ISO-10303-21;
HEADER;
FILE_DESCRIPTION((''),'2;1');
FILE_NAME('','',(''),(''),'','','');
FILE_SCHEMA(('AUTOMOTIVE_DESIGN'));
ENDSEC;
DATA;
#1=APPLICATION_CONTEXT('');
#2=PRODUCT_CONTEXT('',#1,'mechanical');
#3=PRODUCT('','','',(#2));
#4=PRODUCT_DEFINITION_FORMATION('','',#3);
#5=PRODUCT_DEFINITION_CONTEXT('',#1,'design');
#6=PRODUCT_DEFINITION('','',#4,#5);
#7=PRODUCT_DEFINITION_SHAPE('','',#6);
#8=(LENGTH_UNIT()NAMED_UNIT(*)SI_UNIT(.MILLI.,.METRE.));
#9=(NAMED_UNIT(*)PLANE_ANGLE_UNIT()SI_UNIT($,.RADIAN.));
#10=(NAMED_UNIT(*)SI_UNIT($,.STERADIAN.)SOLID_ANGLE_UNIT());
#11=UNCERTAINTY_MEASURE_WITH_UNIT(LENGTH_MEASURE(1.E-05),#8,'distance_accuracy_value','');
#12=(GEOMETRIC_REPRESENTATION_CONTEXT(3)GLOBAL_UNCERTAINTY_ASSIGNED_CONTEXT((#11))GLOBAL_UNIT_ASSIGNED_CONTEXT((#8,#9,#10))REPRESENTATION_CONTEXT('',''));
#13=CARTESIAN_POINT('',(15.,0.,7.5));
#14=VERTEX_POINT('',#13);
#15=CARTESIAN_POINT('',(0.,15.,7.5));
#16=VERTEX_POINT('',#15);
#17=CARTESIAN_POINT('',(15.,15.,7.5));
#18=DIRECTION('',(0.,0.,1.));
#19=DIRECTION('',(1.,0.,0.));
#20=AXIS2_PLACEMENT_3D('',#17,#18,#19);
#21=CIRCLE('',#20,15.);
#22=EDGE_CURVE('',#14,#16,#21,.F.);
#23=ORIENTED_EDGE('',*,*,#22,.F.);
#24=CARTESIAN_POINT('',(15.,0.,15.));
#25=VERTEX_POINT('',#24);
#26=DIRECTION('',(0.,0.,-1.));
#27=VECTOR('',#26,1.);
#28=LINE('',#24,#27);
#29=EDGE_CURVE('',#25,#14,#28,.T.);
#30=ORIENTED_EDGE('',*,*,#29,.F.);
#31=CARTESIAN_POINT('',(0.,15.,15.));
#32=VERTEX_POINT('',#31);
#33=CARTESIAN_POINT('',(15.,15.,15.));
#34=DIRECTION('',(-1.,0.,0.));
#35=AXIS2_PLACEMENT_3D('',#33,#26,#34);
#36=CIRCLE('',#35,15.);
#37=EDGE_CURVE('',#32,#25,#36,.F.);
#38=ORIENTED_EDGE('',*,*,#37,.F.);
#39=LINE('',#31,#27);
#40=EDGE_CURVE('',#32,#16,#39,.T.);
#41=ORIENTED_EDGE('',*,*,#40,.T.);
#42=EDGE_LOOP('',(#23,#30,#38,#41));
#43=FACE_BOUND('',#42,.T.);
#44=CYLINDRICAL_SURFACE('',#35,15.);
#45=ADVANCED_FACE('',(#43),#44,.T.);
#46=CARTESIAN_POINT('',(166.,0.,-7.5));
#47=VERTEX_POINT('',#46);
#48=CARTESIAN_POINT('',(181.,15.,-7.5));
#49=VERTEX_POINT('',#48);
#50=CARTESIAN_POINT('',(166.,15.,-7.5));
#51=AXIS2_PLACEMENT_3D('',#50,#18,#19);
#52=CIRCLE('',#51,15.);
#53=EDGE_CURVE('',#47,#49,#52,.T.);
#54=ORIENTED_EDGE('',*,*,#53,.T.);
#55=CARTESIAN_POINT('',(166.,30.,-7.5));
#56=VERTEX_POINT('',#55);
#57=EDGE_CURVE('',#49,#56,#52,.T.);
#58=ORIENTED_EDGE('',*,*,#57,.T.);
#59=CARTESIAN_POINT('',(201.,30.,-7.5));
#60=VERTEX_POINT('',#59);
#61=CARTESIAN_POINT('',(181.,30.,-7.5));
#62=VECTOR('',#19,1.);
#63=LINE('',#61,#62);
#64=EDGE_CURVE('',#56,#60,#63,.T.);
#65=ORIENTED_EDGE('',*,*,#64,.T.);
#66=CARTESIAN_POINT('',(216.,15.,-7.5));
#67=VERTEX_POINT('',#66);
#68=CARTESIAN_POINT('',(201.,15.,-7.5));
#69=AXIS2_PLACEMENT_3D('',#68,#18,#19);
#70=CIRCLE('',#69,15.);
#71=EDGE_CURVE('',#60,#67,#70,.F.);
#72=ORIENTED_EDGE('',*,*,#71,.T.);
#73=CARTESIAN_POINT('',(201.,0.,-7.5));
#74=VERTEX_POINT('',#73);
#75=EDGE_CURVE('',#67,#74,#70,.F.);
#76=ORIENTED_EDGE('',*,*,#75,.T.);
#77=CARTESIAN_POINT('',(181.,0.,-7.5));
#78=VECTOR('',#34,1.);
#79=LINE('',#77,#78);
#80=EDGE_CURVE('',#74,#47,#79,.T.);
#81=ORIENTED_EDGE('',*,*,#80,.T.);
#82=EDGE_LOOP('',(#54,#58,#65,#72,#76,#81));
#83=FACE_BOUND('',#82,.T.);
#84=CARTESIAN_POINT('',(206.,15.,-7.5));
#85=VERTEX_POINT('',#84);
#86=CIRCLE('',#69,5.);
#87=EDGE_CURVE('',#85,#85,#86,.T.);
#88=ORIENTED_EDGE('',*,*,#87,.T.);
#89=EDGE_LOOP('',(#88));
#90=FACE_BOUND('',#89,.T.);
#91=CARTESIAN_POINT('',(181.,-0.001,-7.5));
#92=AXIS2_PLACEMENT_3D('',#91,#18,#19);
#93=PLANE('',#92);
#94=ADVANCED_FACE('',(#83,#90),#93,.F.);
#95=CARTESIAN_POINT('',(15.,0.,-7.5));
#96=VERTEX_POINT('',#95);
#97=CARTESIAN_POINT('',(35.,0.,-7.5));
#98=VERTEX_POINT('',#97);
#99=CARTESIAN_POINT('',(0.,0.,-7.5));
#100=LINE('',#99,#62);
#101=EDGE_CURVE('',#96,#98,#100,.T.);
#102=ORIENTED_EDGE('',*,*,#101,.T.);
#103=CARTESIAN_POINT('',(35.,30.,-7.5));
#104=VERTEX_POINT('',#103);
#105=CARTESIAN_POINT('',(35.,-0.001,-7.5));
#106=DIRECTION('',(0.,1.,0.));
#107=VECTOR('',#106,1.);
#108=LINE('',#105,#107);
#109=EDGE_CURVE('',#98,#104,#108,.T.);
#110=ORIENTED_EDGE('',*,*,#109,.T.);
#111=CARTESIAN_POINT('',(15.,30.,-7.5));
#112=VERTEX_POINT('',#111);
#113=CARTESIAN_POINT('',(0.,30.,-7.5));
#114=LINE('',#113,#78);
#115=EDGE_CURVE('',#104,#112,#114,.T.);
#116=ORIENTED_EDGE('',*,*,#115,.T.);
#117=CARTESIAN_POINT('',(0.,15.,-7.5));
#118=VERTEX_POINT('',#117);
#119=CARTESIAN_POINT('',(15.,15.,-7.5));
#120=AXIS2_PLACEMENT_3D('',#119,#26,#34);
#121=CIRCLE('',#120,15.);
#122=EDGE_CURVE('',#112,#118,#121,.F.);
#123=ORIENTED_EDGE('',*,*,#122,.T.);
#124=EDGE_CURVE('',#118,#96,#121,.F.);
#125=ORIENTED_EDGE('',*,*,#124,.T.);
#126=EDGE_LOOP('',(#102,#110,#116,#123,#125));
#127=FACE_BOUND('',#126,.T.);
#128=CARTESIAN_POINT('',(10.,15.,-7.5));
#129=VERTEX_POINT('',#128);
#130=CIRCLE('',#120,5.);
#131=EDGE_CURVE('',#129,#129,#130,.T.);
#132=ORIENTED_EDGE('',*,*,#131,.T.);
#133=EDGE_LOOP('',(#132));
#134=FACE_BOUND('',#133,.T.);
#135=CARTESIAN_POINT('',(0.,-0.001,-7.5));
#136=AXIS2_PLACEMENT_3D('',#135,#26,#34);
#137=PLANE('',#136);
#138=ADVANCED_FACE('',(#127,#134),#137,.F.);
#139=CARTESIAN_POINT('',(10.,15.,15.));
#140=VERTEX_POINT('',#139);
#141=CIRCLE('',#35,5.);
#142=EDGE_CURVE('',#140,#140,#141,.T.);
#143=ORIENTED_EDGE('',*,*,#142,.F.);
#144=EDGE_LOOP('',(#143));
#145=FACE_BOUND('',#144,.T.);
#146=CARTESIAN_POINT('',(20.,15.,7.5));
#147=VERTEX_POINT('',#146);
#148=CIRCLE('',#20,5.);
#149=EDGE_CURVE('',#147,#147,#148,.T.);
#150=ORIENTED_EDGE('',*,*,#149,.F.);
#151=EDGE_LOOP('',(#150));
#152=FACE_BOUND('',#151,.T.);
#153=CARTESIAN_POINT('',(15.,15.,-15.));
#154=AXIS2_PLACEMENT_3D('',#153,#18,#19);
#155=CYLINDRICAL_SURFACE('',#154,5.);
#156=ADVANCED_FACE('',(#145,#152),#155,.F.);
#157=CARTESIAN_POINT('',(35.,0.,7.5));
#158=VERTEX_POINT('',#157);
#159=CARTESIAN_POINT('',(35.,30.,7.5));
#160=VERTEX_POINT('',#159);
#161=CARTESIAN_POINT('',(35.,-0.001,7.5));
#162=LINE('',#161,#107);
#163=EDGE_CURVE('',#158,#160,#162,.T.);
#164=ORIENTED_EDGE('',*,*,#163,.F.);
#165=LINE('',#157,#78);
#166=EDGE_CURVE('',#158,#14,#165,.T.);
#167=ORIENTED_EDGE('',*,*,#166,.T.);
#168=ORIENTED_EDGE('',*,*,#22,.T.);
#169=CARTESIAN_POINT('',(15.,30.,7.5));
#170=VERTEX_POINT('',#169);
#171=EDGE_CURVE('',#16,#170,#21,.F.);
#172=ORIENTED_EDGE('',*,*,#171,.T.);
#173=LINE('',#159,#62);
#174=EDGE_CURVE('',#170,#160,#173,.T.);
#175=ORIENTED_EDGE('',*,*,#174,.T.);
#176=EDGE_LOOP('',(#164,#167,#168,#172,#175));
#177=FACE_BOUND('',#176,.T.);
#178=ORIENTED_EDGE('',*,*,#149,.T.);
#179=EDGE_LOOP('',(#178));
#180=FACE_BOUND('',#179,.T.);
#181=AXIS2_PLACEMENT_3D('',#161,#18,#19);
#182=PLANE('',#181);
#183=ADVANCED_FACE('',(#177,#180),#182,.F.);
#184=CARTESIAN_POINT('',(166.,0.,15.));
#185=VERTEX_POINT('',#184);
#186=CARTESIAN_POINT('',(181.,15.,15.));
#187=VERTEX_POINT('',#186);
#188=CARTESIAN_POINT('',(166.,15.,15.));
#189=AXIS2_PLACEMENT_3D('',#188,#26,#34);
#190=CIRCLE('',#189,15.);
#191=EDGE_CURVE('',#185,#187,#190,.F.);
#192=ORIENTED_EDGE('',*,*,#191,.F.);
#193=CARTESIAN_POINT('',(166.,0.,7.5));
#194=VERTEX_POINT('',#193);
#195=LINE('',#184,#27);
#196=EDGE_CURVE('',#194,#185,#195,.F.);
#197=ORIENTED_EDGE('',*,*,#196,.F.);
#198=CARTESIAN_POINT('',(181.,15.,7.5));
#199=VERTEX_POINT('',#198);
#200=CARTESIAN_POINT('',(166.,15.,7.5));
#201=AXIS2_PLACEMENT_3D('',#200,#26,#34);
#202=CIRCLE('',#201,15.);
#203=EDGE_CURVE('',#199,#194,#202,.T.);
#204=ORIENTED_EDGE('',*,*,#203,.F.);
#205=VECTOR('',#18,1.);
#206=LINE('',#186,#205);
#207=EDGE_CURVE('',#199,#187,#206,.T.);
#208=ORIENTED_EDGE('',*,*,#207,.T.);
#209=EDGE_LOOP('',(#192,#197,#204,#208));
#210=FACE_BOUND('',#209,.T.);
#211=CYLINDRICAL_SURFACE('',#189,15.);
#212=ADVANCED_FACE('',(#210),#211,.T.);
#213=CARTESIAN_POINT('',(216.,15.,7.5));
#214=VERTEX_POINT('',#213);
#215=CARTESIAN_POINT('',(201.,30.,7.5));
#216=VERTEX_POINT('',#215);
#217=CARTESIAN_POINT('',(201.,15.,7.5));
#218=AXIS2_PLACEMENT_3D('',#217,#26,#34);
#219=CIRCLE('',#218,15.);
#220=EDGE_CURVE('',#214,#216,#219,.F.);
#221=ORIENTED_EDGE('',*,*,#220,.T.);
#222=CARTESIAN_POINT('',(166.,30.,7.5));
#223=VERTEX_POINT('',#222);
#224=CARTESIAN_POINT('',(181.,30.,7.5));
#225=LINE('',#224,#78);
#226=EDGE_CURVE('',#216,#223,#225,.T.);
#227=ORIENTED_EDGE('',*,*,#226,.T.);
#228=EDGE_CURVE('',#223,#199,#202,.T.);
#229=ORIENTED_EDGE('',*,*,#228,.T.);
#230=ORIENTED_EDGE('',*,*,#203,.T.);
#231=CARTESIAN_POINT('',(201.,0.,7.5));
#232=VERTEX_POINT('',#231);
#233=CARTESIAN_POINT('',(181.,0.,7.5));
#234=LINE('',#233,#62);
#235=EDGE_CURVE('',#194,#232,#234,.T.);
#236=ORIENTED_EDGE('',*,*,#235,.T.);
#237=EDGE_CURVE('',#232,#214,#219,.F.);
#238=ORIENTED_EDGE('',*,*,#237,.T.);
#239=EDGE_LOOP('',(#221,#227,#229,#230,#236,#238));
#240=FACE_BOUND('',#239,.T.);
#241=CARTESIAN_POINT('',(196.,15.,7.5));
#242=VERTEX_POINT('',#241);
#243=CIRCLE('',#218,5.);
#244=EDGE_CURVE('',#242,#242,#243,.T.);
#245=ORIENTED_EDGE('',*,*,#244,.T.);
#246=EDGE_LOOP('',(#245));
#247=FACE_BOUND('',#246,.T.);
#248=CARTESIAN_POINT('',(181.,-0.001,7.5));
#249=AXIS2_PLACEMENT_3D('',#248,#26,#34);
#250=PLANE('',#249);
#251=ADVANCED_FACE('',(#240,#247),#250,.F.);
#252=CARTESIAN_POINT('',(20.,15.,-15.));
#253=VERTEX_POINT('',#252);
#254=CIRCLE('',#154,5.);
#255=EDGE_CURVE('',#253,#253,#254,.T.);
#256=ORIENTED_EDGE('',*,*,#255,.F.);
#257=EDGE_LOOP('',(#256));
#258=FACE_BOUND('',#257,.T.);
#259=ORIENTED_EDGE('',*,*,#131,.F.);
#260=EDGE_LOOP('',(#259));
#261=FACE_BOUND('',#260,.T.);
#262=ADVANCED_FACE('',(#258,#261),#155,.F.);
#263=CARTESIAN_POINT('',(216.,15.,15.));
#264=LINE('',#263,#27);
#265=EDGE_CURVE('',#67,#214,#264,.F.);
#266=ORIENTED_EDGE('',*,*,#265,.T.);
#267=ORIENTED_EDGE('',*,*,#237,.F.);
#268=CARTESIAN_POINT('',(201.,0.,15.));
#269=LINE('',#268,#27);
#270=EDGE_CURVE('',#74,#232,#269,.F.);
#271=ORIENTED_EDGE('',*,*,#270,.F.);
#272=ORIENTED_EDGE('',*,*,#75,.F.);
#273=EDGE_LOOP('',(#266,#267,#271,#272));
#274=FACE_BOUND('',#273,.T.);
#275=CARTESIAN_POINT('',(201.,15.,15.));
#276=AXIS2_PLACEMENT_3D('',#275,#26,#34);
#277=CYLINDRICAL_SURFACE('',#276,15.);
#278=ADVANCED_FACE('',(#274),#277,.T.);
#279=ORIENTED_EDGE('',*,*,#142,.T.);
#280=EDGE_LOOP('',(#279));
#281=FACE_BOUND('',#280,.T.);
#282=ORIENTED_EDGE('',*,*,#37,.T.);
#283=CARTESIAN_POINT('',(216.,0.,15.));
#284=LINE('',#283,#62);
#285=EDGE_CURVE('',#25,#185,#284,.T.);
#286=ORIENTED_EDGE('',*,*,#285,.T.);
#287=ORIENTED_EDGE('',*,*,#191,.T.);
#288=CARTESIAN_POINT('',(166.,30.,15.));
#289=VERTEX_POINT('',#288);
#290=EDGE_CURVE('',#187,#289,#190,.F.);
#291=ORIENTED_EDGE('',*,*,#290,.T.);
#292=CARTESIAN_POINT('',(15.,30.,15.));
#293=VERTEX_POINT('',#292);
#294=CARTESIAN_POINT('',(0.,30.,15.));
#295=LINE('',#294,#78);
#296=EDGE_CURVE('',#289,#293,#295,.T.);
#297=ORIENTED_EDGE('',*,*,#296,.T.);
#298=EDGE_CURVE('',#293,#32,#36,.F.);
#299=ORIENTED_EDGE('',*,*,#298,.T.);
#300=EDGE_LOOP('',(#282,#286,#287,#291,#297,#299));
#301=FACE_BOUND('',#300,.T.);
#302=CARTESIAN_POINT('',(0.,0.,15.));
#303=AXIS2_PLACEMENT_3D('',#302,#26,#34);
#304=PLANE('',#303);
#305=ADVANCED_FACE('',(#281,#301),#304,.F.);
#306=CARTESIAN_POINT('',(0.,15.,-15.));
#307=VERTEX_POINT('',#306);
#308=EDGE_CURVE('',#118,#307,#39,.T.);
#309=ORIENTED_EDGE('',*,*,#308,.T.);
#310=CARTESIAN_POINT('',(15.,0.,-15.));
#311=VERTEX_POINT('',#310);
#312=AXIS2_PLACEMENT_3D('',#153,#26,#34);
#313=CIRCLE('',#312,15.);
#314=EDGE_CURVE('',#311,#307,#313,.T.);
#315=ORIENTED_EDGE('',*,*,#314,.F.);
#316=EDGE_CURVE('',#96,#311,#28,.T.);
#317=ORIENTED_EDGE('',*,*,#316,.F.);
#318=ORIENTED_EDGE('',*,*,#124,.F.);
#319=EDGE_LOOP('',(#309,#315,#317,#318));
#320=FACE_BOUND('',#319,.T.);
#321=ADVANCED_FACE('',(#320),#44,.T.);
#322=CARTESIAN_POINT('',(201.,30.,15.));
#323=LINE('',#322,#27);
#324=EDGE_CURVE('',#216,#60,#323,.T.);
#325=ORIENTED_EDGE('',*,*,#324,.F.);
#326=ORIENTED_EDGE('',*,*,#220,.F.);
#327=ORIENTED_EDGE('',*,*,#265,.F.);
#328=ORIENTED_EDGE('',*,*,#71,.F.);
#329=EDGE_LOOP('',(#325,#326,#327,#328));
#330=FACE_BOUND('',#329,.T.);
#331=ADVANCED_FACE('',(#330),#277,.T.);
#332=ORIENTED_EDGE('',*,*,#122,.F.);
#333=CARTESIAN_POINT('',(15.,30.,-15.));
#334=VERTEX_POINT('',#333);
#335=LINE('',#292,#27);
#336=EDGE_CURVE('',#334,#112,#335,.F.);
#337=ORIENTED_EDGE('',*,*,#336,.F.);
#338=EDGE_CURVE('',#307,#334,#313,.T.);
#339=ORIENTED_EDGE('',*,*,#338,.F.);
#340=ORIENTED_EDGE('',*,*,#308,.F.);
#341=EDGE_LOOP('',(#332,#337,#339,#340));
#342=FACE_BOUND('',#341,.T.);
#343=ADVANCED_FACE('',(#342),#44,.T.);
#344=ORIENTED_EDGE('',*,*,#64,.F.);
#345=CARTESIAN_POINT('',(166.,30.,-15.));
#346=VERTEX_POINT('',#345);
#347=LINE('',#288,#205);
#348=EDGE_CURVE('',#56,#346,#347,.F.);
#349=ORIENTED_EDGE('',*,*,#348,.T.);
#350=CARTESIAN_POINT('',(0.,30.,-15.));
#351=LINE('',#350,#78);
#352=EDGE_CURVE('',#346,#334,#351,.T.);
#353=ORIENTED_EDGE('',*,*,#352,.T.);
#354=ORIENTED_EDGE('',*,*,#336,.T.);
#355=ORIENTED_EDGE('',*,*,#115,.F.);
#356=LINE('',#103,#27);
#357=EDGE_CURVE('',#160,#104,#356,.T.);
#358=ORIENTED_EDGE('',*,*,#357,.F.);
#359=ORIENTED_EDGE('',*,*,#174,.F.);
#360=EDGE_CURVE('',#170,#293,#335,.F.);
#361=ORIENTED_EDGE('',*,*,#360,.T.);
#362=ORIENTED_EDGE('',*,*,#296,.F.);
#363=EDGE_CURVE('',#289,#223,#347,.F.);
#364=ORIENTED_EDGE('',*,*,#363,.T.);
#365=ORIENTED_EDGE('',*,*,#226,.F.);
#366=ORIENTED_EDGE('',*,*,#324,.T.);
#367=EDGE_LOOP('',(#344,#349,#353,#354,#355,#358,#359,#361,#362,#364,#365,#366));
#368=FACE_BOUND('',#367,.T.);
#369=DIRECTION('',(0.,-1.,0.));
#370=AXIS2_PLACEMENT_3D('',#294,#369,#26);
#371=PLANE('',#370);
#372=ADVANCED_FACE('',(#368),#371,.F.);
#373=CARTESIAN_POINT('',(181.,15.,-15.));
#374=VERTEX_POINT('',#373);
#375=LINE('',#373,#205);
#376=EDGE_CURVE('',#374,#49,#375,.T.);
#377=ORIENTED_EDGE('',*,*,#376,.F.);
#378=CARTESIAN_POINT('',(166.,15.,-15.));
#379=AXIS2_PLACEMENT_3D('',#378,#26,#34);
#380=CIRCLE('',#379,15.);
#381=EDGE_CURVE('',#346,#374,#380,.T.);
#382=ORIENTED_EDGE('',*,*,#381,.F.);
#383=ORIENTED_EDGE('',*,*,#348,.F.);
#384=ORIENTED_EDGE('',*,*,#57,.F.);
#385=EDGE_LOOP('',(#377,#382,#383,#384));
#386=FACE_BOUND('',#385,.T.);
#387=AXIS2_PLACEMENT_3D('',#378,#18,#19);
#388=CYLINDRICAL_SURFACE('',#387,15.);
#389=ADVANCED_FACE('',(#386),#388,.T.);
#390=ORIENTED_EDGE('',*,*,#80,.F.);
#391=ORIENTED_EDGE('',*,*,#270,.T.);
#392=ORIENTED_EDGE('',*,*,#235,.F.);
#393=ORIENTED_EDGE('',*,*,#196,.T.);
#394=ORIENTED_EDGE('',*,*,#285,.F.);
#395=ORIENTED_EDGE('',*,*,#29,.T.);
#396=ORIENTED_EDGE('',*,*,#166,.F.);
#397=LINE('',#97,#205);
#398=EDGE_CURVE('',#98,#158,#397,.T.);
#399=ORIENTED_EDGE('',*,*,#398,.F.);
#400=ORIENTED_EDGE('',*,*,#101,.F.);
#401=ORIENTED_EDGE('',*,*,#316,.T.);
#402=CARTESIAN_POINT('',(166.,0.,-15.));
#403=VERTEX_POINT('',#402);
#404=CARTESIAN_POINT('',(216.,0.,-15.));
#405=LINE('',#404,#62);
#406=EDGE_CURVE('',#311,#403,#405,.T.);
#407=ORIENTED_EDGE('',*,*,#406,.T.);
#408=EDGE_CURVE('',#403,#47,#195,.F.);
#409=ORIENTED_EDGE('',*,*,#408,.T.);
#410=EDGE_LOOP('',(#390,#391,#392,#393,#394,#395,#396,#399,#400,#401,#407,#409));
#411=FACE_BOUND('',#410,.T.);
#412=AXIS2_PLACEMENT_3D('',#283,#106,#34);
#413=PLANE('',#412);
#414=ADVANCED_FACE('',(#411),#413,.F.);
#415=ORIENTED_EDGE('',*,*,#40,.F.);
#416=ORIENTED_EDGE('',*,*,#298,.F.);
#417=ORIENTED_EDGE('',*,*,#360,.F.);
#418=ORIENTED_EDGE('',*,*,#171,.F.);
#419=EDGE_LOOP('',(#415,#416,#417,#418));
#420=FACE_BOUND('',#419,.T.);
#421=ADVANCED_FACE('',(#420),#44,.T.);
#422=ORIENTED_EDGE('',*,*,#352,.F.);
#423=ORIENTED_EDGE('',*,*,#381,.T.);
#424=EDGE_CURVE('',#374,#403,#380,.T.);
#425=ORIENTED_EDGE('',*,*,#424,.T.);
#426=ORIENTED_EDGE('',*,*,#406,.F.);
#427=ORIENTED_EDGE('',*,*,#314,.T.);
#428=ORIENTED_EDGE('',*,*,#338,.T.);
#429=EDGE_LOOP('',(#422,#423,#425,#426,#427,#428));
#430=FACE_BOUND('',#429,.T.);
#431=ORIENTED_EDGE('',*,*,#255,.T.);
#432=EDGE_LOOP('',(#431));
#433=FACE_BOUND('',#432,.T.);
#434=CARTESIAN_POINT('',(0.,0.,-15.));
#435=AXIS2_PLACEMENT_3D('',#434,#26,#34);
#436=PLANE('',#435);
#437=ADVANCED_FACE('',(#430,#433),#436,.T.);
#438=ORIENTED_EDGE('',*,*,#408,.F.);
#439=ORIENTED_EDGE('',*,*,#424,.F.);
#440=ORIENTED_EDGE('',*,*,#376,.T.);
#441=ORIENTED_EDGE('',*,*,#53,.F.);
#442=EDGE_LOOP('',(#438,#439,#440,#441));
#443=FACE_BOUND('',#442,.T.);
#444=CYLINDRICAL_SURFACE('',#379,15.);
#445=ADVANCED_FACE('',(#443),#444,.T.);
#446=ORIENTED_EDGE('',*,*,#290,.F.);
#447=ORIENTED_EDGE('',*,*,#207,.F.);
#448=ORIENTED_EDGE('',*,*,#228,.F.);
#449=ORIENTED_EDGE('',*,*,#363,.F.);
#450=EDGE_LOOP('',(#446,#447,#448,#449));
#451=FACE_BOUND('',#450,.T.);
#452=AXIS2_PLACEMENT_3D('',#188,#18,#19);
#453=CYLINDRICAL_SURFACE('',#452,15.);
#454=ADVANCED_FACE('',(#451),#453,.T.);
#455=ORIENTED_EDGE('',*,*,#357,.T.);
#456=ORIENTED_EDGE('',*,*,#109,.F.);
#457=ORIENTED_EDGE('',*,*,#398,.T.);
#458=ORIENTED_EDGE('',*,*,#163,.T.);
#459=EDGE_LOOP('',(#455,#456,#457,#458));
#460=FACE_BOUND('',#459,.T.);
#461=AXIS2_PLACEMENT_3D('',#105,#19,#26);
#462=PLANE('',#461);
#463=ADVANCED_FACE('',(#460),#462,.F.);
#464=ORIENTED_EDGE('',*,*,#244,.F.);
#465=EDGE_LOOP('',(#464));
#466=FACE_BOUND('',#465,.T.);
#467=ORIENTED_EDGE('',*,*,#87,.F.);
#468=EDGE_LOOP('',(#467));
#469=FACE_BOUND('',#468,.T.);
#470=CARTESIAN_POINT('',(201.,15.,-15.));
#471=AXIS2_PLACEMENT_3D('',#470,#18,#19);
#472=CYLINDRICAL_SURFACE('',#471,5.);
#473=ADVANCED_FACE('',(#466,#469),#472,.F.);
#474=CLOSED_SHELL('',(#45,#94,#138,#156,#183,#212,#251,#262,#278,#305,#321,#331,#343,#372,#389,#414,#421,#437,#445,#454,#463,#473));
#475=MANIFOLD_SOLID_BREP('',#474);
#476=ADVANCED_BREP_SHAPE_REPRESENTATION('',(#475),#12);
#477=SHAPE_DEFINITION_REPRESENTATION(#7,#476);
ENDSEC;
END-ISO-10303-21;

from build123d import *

# Parameters (mm, degrees)
SKETCH1_W               = 216
SKETCH1_H               = 30
BOSS_EXTRUDE1_DEPTH     = 15
CUT_EXTRUDE1_REACH      = 220.589
SKETCH2_W               = 35
SKETCH2_H               = 15
SKETCH2_H_2             = 7.5
FILLET1_R               = 15
CUT_EXTRUDE2_DEPTH      = 221.127235934
CUT_EXTRUDE2_DEPTH_BACK = 221.127235934
SKETCH3_R               = 5
FILLET3_R               = 15


with BuildPart() as part:
    # Sketch1 → Boss-Extrude1 (new, symmetric)
    with BuildSketch(Plane.XY):
        with Locations((108, 15)):
            Rectangle(SKETCH1_W, SKETCH1_H)
    extrude(amount=BOSS_EXTRUDE1_DEPTH, both=True)

    # Sketch2 → Cut-Extrude1 (cut, up to next)
    with BuildSketch(Plane(origin=(0, 30, 0), x_dir=(1, 0, 0), z_dir=(0, 1, 0)), mode=Mode.PRIVATE) as cut_extrude1_sk1:
        with Locations((17.5, 0)):
            Rectangle(SKETCH2_W, SKETCH2_H)
    cut_extrude1_tool1 = extrude(cut_extrude1_sk1.sketch, amount=-CUT_EXTRUDE1_REACH, mode=Mode.PRIVATE) & part.part
    # Sketch2 → Cut-Extrude1 (cut, up to next)
    with BuildSketch(Plane(origin=(0, 30, 0), x_dir=(1, 0, 0), z_dir=(0, 1, 0)), mode=Mode.PRIVATE) as cut_extrude1_sk2:
        with Locations((198.5, 11.25)):
            Rectangle(SKETCH2_W, SKETCH2_H_2)
    cut_extrude1_tool2 = extrude(cut_extrude1_sk2.sketch, amount=-CUT_EXTRUDE1_REACH, mode=Mode.PRIVATE) & part.part
    # Sketch2 → Cut-Extrude1 (cut, up to next)
    with BuildSketch(Plane(origin=(0, 30, 0), x_dir=(1, 0, 0), z_dir=(0, 1, 0)), mode=Mode.PRIVATE) as cut_extrude1_sk3:
        with Locations((198.5, -11.25)):
            Rectangle(SKETCH2_W, SKETCH2_H_2)
    cut_extrude1_tool3 = extrude(cut_extrude1_sk3.sketch, amount=-CUT_EXTRUDE1_REACH, mode=Mode.PRIVATE) & part.part
    add(cut_extrude1_tool1.solids().sort_by_distance((17.5, 30, 0))[0], mode=Mode.SUBTRACT)
    add(cut_extrude1_tool2.solids().sort_by_distance((198.5, 30, -11.25))[0], mode=Mode.SUBTRACT)
    add(cut_extrude1_tool3.solids().sort_by_distance((198.5, 30, 11.25))[0], mode=Mode.SUBTRACT)

    # Fillet1
    fillet1_edges = [part.edges().sort_by_distance(p)[0] for p in [
        (216, 0, 0),
        (216, 30, 0),
        (0, 0, 11.25),
        (0, 0, -11.25),
        (0, 30, -11.25),
        (0, 30, 11.25),
    ]]
    fillet(fillet1_edges, radius=FILLET1_R - 0.0001)  # a hair under: the kernel refuses the full size

    # Sketch3 → Cut-Extrude2 (cut, two sides: drawn at the far end of the back side and taken through both)
    with BuildSketch(Plane.XY.offset(15).offset(-CUT_EXTRUDE2_DEPTH_BACK)):
        with Locations((15, 15)):
            Circle(SKETCH3_R)
        with Locations((201, 15)):
            Circle(SKETCH3_R)
    extrude(amount=CUT_EXTRUDE2_DEPTH + CUT_EXTRUDE2_DEPTH_BACK, mode=Mode.SUBTRACT)

    # Fillet3
    fillet3_edges = [part.edges().sort_by_distance(p)[0] for p in [
        (181, 0, -11.25),
        (181, 30, -11.25),
        (181, 0, 11.25),
        (181, 30, 11.25),
    ]]
    fillet(fillet3_edges, radius=FILLET3_R - 0.0001)  # a hair under: the kernel refuses the full size


solid = part.part
